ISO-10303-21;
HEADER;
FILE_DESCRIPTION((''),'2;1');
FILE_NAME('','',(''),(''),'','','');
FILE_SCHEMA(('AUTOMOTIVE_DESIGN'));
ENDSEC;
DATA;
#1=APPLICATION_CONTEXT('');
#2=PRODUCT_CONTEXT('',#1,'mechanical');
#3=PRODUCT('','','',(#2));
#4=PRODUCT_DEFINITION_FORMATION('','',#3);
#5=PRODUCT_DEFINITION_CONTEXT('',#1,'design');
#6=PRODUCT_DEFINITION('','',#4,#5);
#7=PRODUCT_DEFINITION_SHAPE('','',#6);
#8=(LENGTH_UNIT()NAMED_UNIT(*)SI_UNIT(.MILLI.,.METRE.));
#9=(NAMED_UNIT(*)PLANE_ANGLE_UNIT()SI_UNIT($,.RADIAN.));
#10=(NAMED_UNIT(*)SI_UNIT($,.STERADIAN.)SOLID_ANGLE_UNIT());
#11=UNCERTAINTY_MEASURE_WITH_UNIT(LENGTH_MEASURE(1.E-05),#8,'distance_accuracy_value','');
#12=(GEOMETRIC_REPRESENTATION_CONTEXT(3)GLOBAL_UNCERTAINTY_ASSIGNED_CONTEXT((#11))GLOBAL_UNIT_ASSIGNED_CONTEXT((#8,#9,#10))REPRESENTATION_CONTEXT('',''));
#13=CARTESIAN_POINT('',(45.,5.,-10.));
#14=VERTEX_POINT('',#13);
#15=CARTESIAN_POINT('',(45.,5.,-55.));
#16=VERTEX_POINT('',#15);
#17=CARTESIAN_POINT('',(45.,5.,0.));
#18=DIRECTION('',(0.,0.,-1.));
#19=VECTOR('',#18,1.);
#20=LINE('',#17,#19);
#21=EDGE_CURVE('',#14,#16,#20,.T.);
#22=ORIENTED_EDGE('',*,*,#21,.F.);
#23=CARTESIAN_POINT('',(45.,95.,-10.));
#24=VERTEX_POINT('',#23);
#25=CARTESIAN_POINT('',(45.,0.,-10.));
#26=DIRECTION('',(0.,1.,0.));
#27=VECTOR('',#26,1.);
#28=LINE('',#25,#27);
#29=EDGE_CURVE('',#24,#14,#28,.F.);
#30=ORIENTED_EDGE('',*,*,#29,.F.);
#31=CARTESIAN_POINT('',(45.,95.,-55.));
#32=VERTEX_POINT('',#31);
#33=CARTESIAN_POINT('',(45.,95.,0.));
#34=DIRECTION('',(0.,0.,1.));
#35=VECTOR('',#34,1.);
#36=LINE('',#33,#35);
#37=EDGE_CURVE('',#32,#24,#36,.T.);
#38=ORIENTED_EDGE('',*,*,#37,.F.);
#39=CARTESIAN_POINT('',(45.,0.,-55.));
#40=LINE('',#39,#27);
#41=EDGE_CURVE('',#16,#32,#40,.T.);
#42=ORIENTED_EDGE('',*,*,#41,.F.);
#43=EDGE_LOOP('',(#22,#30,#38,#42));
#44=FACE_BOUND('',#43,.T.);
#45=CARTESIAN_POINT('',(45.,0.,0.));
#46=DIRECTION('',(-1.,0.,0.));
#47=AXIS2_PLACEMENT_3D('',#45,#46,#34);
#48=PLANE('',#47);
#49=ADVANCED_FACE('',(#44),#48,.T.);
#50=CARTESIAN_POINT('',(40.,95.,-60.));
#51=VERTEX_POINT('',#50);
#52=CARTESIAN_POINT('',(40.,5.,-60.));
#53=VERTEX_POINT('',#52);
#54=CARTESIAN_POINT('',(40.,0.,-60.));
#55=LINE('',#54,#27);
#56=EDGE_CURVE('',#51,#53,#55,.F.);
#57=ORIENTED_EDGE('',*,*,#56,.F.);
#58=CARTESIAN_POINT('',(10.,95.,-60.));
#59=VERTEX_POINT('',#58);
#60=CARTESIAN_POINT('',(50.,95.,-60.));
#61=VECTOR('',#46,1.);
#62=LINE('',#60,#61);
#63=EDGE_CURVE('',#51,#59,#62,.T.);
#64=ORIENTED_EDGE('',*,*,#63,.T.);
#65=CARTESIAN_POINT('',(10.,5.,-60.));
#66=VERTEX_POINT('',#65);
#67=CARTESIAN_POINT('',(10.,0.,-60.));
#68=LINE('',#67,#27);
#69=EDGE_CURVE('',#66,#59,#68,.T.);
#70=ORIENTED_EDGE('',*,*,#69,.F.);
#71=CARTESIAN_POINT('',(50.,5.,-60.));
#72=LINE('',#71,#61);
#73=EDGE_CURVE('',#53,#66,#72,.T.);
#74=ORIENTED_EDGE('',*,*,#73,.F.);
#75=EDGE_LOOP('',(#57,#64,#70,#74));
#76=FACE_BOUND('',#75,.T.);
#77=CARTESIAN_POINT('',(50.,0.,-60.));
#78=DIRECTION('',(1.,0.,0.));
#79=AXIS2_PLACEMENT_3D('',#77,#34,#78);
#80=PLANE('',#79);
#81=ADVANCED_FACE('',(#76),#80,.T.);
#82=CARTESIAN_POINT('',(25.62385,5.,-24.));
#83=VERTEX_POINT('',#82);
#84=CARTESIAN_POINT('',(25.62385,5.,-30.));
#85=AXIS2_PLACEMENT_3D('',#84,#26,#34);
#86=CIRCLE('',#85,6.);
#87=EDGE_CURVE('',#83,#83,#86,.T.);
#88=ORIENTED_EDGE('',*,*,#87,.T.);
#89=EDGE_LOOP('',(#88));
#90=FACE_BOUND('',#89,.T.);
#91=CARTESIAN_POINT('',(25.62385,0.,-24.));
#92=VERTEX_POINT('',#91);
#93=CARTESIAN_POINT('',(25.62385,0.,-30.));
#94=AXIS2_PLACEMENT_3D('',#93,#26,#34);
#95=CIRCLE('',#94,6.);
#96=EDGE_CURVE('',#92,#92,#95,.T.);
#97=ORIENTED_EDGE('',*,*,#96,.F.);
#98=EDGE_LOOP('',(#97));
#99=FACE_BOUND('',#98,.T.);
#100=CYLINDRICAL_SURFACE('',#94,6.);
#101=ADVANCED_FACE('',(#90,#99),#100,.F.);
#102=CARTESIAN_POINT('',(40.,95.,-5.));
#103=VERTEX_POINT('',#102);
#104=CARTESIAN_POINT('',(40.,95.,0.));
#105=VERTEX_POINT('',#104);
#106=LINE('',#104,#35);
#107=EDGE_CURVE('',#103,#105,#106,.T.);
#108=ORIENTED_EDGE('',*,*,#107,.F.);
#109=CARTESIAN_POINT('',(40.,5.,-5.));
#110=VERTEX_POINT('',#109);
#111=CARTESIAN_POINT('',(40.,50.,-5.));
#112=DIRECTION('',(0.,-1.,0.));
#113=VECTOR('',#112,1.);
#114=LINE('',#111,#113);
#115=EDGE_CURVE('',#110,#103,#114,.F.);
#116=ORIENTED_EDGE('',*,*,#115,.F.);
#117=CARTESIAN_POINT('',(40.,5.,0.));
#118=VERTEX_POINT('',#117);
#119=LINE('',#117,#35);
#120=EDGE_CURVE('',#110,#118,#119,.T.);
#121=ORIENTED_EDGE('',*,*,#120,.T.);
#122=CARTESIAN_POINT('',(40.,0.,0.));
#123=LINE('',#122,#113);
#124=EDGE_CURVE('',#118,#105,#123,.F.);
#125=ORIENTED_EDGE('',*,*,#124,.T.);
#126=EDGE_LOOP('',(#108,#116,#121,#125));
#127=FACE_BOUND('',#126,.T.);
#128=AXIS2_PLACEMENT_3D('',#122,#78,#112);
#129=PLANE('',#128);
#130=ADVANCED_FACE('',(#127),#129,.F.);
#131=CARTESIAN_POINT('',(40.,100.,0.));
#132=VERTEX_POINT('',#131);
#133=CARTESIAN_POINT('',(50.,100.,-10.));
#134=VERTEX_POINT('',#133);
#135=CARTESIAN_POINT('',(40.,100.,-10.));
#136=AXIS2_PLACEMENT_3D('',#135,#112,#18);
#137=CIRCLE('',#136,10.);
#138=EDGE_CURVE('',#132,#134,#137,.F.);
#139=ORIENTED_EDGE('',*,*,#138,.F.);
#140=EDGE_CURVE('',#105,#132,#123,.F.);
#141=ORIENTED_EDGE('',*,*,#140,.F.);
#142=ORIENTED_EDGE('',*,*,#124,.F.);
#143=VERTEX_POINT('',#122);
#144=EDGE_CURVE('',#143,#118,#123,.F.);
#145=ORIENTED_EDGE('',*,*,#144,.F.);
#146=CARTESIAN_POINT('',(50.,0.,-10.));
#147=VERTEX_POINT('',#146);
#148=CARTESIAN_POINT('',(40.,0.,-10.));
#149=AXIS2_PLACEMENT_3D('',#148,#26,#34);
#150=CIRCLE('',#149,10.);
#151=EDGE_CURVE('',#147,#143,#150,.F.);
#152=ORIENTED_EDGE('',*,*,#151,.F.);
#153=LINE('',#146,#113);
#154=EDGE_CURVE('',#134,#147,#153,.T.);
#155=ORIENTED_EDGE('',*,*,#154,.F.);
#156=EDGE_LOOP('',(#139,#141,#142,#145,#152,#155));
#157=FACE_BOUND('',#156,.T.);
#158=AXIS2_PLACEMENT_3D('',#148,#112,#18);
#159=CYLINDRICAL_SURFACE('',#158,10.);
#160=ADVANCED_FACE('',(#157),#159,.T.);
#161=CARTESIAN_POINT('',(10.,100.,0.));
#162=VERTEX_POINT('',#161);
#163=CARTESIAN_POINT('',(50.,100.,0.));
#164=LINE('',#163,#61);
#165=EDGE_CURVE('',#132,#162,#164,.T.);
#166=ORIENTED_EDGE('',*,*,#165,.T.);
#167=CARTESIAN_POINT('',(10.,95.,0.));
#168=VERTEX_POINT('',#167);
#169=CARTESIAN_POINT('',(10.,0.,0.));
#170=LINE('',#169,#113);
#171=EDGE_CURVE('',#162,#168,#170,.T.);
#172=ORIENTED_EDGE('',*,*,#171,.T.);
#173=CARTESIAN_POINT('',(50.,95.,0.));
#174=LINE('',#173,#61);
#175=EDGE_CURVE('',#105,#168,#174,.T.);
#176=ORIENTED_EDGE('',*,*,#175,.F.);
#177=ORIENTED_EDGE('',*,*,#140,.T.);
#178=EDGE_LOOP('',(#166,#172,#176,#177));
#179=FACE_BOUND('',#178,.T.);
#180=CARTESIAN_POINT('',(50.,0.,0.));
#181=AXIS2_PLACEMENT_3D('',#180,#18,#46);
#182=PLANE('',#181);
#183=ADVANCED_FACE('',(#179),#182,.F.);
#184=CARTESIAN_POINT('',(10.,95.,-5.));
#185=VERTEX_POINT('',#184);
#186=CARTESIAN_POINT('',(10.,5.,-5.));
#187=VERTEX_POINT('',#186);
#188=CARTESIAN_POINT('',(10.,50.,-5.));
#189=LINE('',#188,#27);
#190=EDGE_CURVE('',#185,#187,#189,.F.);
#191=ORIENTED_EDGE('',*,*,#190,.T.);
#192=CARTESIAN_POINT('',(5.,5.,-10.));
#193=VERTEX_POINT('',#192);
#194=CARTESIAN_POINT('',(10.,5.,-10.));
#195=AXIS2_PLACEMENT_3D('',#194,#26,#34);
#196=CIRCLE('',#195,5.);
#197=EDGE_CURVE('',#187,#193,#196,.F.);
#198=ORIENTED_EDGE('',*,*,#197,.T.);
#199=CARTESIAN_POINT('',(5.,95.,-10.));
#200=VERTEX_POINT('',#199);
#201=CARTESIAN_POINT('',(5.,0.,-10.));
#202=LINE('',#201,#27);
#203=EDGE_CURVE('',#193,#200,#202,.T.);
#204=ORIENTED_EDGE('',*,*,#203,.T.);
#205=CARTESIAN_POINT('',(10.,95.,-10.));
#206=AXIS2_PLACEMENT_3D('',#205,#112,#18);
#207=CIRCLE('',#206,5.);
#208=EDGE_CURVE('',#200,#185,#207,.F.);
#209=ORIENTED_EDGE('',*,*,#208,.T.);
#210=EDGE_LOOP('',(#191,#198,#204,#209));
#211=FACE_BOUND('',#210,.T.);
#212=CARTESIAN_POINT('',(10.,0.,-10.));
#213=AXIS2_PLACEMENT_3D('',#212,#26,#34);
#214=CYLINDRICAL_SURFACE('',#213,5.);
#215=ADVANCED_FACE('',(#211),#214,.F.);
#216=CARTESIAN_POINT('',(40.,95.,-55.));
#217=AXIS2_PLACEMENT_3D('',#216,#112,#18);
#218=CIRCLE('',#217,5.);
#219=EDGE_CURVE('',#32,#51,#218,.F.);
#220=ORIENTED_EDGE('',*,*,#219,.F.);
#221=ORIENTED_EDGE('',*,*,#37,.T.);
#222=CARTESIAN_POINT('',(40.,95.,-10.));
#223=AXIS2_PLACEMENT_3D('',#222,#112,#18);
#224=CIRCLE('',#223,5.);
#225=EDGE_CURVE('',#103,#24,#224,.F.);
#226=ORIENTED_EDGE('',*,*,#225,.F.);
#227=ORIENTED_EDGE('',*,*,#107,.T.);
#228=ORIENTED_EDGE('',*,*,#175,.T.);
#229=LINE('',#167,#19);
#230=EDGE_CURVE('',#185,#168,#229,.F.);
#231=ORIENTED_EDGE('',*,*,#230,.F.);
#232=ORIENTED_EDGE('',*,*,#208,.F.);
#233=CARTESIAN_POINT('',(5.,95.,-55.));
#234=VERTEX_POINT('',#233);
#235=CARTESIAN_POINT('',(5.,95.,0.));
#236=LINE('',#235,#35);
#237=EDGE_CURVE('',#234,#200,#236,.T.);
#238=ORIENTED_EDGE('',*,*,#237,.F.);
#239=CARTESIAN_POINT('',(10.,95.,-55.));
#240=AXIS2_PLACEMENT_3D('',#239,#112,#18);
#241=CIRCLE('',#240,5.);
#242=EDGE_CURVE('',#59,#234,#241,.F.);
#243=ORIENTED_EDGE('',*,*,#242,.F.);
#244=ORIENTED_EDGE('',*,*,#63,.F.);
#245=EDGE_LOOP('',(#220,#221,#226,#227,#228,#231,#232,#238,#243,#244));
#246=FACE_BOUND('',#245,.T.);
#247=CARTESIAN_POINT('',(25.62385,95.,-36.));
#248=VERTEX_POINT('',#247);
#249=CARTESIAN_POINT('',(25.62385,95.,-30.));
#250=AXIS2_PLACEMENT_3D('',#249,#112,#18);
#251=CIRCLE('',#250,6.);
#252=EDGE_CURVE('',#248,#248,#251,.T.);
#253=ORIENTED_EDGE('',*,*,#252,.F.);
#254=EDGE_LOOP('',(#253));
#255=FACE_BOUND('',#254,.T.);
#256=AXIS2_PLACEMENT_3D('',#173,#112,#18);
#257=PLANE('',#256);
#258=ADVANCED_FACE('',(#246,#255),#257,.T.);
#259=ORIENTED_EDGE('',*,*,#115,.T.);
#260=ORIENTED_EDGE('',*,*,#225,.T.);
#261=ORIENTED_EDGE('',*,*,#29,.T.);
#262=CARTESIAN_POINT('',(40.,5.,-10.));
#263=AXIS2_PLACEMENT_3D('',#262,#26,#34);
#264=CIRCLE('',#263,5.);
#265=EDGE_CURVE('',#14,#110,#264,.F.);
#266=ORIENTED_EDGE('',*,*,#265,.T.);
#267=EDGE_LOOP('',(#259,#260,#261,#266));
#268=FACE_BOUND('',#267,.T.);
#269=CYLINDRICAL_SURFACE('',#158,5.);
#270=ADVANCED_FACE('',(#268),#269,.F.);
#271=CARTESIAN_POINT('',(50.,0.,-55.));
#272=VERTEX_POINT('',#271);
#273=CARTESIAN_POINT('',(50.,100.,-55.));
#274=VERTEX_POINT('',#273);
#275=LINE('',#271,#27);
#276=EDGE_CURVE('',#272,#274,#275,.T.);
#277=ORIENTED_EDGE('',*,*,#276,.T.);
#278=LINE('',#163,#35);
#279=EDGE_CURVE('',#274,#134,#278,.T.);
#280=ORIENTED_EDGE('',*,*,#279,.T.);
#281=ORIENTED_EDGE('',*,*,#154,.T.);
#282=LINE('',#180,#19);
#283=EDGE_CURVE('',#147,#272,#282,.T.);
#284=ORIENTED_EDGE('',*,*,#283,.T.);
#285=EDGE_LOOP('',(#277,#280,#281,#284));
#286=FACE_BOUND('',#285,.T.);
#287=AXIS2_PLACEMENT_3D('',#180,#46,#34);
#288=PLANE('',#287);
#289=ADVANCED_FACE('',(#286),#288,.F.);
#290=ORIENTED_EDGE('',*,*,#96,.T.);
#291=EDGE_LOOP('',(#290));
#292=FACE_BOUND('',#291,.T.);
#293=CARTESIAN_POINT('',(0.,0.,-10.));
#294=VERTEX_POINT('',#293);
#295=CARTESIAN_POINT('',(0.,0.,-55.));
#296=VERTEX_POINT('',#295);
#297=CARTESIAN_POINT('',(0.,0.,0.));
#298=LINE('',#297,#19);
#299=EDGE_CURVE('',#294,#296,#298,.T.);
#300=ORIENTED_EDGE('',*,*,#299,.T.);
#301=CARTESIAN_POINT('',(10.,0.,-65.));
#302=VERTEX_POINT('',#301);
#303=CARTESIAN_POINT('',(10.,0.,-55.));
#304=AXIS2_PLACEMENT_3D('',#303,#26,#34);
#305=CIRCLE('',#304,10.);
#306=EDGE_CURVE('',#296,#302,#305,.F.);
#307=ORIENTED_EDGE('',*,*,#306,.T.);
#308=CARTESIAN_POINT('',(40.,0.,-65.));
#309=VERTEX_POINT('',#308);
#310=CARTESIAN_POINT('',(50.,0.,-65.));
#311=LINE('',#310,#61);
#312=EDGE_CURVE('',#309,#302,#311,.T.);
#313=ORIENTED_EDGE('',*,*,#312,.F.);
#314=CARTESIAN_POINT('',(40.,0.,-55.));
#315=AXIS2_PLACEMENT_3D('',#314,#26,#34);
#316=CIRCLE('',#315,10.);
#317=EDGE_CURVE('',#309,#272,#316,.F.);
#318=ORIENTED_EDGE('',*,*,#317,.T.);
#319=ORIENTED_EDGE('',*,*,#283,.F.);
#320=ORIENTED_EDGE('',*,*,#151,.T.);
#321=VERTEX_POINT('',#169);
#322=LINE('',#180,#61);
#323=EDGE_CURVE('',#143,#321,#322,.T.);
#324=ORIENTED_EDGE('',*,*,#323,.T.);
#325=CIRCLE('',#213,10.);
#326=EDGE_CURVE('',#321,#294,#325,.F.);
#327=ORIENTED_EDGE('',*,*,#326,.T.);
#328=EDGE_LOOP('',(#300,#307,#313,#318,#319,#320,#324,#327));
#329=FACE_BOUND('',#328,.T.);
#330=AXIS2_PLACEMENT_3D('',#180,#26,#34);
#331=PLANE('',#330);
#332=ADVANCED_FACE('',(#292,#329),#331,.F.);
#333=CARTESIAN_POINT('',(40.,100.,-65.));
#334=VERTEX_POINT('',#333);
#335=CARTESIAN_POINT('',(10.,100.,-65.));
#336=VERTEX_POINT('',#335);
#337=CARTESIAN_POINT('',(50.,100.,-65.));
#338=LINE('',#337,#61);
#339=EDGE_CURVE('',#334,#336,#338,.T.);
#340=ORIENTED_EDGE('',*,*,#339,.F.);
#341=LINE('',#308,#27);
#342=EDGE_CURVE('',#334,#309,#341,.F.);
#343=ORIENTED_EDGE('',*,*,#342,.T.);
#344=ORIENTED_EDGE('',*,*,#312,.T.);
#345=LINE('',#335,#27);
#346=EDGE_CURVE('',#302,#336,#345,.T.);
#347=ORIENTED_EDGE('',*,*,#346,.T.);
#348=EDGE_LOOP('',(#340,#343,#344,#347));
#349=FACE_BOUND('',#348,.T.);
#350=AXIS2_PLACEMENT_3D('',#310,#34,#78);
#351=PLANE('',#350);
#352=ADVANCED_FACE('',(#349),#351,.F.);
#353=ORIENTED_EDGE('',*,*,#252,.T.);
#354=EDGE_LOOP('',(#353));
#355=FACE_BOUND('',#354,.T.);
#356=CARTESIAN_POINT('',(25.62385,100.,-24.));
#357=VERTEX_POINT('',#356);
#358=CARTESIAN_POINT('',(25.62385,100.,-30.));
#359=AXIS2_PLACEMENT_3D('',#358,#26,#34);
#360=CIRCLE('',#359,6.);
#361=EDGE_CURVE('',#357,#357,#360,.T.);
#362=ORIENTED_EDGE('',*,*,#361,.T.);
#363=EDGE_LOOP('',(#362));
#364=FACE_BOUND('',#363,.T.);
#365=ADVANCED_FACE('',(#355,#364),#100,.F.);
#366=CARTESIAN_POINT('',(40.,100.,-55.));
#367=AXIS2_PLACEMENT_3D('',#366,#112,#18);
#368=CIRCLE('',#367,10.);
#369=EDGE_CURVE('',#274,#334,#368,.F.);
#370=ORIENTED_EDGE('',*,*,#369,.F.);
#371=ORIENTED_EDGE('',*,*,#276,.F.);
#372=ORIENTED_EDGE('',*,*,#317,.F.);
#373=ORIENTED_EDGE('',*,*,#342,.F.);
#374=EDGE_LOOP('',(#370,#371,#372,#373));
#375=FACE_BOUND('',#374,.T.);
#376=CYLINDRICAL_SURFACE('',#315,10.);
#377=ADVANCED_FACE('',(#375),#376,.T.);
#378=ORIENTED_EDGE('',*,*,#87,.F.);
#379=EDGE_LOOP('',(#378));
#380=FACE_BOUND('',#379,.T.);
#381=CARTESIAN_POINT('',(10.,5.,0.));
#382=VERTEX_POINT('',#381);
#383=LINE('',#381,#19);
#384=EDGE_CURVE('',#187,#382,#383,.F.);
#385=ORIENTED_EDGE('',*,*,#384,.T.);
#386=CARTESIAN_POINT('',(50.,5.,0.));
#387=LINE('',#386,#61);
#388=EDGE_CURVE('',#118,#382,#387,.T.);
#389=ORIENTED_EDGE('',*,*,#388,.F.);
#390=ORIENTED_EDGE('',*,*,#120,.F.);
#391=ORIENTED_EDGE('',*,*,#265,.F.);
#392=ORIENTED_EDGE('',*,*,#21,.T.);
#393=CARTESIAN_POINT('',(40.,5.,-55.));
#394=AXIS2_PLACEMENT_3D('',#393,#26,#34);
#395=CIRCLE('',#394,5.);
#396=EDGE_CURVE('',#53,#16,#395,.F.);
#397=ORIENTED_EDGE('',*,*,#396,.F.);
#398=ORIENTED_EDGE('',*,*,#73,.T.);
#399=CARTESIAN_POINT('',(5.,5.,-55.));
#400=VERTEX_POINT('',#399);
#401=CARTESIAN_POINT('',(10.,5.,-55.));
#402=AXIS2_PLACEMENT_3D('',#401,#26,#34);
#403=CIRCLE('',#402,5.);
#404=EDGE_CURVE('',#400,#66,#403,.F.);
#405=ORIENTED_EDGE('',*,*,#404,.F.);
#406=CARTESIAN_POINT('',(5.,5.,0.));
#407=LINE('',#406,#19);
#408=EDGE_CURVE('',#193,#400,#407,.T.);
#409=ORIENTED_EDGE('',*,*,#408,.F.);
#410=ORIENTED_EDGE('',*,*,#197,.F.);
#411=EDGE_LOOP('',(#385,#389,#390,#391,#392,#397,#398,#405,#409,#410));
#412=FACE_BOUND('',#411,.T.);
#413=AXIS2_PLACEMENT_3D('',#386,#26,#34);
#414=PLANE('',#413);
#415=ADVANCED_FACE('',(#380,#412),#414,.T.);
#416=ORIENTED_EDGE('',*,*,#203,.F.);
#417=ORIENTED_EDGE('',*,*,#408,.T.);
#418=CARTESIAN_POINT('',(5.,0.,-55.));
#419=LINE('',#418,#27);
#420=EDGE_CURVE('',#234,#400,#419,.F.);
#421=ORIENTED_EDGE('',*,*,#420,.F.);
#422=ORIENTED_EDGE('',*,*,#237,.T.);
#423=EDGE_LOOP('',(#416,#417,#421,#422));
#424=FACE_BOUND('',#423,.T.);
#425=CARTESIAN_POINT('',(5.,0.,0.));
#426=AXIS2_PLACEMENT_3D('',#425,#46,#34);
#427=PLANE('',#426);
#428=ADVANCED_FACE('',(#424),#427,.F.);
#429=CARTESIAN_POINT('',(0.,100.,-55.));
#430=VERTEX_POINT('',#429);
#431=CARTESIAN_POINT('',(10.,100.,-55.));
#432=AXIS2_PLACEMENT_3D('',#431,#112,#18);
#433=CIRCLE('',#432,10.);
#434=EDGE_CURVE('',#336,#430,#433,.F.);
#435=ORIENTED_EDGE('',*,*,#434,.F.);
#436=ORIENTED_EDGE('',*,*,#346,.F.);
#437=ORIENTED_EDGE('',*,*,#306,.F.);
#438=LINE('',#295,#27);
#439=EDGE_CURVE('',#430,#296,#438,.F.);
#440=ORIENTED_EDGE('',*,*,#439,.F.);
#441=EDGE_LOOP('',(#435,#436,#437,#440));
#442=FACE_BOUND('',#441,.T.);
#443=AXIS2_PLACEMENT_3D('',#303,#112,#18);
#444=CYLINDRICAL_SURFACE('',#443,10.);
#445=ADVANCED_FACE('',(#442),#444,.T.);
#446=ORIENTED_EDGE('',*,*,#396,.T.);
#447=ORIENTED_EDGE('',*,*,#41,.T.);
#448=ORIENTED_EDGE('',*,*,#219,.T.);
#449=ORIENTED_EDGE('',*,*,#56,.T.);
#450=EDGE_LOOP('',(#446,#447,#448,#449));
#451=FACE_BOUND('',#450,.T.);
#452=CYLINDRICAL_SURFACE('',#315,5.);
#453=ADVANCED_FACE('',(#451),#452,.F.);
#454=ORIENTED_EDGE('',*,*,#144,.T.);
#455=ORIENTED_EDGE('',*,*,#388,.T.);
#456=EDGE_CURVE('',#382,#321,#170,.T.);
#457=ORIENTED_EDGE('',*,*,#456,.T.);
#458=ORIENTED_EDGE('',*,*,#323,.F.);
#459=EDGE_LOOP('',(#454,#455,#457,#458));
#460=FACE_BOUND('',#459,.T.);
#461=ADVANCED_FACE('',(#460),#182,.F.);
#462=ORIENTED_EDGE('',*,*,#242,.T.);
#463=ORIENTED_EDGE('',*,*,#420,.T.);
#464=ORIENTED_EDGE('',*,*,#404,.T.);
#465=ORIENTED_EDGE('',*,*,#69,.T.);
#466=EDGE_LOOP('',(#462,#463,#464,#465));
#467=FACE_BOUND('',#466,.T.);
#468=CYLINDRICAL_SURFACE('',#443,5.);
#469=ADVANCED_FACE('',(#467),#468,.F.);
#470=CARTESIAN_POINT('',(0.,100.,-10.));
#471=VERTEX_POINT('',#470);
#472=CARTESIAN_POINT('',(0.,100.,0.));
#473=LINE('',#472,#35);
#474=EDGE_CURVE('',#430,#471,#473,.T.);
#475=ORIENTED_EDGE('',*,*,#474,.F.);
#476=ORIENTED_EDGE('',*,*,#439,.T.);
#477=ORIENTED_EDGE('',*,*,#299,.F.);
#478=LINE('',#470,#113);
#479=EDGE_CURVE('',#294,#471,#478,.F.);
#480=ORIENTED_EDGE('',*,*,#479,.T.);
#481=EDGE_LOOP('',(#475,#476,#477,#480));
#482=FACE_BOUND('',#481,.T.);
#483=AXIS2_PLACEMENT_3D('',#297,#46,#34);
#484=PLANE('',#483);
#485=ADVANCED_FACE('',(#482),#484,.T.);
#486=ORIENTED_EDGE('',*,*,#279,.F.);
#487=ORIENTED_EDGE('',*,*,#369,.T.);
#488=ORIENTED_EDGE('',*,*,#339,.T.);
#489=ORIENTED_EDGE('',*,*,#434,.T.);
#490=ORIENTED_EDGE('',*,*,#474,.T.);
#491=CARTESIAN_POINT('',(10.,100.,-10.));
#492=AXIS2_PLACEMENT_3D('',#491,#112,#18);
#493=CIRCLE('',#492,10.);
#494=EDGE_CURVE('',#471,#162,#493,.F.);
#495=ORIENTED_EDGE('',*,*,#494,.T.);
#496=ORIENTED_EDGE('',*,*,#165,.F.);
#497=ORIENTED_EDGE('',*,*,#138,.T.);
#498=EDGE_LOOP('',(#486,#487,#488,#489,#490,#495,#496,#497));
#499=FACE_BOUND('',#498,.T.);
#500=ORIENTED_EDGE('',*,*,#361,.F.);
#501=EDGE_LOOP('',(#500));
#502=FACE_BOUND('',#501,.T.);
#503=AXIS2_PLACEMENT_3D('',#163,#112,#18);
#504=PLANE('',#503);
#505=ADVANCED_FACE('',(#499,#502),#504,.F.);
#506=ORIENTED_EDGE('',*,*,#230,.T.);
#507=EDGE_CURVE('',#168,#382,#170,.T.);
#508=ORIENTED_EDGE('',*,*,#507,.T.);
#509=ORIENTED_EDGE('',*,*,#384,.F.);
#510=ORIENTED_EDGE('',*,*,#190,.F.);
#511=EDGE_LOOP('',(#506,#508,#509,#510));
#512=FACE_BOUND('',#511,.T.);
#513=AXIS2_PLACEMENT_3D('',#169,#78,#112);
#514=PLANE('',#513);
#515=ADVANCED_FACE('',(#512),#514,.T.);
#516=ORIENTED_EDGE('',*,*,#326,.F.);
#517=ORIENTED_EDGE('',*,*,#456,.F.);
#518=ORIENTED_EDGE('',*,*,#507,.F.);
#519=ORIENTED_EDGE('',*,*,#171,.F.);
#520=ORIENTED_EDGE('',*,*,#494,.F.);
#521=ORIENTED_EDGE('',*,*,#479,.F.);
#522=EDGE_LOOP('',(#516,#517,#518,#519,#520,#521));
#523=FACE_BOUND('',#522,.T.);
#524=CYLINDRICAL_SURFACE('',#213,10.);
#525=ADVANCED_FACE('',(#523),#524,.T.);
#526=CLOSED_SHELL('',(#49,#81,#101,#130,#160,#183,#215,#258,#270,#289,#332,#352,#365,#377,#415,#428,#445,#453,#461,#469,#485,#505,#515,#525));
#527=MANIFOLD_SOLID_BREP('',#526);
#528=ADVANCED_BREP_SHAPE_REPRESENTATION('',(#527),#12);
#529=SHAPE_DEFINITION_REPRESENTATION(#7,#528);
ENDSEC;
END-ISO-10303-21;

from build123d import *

# Parameters (mm, degrees)
CROQUIS1_W              = 65
CROQUIS1_H              = 100
SALIENTE_EXTRUIR1_DEPTH = 50
REDONDEO1_R             = 10
VACIADO1_START          = 5
VACIADO1_DEPTH          = 90
CROQUIS3_R              = 6
CORTAR_EXTRUIR1_DEPTH   = 130.325171564


# Read off the part's stored shape, not the designer's step: Vaciado1
with BuildPart() as part:
    # Croquis1 → Saliente-Extruir1 (new body)
    with BuildSketch(Plane(origin=(0, 0, 0), x_dir=(0, 0, -1), z_dir=(1, 0, 0))):
        with Locations((32.5, 50)):
            Rectangle(CROQUIS1_W, CROQUIS1_H)
    extrude(amount=SALIENTE_EXTRUIR1_DEPTH)

    # Redondeo1
    redondeo1_edges = [part.edges().sort_by_distance(p)[0] for p in [
        (50, 50, -65),
        (50, 50, 0),
        (0, 50, -65),
        (0, 50, 0),
    ]]
    fillet(redondeo1_edges, radius=REDONDEO1_R)

    # Vaciado1 outline → Vaciado1 (cut)
    with BuildSketch(Plane(origin=(0, 0, 0), x_dir=(1, 0, 0), z_dir=(0, 1, 0)).offset(VACIADO1_START)):
        with BuildLine():
            Line((10, 0), (40, 0))
            Line((40, 0), (40, 5))
            ThreePointArc((40, 5), (43.535533906, 6.464466094), (45, 10))
            Line((45, 10), (45, 55))
            ThreePointArc((45, 55), (43.535533906, 58.535533906), (40, 60))
            Line((40, 60), (10, 60))
            ThreePointArc((10, 60), (6.464466094, 58.535533906), (5, 55))
            Line((5, 55), (5, 10))
            ThreePointArc((5, 10), (6.464466094, 6.464466094), (10, 5))
            Line((10, 5), (10, 0))
        make_face()
    extrude(amount=VACIADO1_DEPTH, mode=Mode.SUBTRACT)

    # Croquis3 → Cortar-Extruir1 (cut, through all)
    with BuildSketch(Plane(origin=(0, 100, 0), x_dir=(1, 0, 0), z_dir=(0, 1, 0))):
        with Locations(Location((25.623850115, 30, 0), (0, 0, 270))):
            Circle(CROQUIS3_R)
    extrude(amount=-CORTAR_EXTRUIR1_DEPTH, mode=Mode.SUBTRACT)


solid = part.part
